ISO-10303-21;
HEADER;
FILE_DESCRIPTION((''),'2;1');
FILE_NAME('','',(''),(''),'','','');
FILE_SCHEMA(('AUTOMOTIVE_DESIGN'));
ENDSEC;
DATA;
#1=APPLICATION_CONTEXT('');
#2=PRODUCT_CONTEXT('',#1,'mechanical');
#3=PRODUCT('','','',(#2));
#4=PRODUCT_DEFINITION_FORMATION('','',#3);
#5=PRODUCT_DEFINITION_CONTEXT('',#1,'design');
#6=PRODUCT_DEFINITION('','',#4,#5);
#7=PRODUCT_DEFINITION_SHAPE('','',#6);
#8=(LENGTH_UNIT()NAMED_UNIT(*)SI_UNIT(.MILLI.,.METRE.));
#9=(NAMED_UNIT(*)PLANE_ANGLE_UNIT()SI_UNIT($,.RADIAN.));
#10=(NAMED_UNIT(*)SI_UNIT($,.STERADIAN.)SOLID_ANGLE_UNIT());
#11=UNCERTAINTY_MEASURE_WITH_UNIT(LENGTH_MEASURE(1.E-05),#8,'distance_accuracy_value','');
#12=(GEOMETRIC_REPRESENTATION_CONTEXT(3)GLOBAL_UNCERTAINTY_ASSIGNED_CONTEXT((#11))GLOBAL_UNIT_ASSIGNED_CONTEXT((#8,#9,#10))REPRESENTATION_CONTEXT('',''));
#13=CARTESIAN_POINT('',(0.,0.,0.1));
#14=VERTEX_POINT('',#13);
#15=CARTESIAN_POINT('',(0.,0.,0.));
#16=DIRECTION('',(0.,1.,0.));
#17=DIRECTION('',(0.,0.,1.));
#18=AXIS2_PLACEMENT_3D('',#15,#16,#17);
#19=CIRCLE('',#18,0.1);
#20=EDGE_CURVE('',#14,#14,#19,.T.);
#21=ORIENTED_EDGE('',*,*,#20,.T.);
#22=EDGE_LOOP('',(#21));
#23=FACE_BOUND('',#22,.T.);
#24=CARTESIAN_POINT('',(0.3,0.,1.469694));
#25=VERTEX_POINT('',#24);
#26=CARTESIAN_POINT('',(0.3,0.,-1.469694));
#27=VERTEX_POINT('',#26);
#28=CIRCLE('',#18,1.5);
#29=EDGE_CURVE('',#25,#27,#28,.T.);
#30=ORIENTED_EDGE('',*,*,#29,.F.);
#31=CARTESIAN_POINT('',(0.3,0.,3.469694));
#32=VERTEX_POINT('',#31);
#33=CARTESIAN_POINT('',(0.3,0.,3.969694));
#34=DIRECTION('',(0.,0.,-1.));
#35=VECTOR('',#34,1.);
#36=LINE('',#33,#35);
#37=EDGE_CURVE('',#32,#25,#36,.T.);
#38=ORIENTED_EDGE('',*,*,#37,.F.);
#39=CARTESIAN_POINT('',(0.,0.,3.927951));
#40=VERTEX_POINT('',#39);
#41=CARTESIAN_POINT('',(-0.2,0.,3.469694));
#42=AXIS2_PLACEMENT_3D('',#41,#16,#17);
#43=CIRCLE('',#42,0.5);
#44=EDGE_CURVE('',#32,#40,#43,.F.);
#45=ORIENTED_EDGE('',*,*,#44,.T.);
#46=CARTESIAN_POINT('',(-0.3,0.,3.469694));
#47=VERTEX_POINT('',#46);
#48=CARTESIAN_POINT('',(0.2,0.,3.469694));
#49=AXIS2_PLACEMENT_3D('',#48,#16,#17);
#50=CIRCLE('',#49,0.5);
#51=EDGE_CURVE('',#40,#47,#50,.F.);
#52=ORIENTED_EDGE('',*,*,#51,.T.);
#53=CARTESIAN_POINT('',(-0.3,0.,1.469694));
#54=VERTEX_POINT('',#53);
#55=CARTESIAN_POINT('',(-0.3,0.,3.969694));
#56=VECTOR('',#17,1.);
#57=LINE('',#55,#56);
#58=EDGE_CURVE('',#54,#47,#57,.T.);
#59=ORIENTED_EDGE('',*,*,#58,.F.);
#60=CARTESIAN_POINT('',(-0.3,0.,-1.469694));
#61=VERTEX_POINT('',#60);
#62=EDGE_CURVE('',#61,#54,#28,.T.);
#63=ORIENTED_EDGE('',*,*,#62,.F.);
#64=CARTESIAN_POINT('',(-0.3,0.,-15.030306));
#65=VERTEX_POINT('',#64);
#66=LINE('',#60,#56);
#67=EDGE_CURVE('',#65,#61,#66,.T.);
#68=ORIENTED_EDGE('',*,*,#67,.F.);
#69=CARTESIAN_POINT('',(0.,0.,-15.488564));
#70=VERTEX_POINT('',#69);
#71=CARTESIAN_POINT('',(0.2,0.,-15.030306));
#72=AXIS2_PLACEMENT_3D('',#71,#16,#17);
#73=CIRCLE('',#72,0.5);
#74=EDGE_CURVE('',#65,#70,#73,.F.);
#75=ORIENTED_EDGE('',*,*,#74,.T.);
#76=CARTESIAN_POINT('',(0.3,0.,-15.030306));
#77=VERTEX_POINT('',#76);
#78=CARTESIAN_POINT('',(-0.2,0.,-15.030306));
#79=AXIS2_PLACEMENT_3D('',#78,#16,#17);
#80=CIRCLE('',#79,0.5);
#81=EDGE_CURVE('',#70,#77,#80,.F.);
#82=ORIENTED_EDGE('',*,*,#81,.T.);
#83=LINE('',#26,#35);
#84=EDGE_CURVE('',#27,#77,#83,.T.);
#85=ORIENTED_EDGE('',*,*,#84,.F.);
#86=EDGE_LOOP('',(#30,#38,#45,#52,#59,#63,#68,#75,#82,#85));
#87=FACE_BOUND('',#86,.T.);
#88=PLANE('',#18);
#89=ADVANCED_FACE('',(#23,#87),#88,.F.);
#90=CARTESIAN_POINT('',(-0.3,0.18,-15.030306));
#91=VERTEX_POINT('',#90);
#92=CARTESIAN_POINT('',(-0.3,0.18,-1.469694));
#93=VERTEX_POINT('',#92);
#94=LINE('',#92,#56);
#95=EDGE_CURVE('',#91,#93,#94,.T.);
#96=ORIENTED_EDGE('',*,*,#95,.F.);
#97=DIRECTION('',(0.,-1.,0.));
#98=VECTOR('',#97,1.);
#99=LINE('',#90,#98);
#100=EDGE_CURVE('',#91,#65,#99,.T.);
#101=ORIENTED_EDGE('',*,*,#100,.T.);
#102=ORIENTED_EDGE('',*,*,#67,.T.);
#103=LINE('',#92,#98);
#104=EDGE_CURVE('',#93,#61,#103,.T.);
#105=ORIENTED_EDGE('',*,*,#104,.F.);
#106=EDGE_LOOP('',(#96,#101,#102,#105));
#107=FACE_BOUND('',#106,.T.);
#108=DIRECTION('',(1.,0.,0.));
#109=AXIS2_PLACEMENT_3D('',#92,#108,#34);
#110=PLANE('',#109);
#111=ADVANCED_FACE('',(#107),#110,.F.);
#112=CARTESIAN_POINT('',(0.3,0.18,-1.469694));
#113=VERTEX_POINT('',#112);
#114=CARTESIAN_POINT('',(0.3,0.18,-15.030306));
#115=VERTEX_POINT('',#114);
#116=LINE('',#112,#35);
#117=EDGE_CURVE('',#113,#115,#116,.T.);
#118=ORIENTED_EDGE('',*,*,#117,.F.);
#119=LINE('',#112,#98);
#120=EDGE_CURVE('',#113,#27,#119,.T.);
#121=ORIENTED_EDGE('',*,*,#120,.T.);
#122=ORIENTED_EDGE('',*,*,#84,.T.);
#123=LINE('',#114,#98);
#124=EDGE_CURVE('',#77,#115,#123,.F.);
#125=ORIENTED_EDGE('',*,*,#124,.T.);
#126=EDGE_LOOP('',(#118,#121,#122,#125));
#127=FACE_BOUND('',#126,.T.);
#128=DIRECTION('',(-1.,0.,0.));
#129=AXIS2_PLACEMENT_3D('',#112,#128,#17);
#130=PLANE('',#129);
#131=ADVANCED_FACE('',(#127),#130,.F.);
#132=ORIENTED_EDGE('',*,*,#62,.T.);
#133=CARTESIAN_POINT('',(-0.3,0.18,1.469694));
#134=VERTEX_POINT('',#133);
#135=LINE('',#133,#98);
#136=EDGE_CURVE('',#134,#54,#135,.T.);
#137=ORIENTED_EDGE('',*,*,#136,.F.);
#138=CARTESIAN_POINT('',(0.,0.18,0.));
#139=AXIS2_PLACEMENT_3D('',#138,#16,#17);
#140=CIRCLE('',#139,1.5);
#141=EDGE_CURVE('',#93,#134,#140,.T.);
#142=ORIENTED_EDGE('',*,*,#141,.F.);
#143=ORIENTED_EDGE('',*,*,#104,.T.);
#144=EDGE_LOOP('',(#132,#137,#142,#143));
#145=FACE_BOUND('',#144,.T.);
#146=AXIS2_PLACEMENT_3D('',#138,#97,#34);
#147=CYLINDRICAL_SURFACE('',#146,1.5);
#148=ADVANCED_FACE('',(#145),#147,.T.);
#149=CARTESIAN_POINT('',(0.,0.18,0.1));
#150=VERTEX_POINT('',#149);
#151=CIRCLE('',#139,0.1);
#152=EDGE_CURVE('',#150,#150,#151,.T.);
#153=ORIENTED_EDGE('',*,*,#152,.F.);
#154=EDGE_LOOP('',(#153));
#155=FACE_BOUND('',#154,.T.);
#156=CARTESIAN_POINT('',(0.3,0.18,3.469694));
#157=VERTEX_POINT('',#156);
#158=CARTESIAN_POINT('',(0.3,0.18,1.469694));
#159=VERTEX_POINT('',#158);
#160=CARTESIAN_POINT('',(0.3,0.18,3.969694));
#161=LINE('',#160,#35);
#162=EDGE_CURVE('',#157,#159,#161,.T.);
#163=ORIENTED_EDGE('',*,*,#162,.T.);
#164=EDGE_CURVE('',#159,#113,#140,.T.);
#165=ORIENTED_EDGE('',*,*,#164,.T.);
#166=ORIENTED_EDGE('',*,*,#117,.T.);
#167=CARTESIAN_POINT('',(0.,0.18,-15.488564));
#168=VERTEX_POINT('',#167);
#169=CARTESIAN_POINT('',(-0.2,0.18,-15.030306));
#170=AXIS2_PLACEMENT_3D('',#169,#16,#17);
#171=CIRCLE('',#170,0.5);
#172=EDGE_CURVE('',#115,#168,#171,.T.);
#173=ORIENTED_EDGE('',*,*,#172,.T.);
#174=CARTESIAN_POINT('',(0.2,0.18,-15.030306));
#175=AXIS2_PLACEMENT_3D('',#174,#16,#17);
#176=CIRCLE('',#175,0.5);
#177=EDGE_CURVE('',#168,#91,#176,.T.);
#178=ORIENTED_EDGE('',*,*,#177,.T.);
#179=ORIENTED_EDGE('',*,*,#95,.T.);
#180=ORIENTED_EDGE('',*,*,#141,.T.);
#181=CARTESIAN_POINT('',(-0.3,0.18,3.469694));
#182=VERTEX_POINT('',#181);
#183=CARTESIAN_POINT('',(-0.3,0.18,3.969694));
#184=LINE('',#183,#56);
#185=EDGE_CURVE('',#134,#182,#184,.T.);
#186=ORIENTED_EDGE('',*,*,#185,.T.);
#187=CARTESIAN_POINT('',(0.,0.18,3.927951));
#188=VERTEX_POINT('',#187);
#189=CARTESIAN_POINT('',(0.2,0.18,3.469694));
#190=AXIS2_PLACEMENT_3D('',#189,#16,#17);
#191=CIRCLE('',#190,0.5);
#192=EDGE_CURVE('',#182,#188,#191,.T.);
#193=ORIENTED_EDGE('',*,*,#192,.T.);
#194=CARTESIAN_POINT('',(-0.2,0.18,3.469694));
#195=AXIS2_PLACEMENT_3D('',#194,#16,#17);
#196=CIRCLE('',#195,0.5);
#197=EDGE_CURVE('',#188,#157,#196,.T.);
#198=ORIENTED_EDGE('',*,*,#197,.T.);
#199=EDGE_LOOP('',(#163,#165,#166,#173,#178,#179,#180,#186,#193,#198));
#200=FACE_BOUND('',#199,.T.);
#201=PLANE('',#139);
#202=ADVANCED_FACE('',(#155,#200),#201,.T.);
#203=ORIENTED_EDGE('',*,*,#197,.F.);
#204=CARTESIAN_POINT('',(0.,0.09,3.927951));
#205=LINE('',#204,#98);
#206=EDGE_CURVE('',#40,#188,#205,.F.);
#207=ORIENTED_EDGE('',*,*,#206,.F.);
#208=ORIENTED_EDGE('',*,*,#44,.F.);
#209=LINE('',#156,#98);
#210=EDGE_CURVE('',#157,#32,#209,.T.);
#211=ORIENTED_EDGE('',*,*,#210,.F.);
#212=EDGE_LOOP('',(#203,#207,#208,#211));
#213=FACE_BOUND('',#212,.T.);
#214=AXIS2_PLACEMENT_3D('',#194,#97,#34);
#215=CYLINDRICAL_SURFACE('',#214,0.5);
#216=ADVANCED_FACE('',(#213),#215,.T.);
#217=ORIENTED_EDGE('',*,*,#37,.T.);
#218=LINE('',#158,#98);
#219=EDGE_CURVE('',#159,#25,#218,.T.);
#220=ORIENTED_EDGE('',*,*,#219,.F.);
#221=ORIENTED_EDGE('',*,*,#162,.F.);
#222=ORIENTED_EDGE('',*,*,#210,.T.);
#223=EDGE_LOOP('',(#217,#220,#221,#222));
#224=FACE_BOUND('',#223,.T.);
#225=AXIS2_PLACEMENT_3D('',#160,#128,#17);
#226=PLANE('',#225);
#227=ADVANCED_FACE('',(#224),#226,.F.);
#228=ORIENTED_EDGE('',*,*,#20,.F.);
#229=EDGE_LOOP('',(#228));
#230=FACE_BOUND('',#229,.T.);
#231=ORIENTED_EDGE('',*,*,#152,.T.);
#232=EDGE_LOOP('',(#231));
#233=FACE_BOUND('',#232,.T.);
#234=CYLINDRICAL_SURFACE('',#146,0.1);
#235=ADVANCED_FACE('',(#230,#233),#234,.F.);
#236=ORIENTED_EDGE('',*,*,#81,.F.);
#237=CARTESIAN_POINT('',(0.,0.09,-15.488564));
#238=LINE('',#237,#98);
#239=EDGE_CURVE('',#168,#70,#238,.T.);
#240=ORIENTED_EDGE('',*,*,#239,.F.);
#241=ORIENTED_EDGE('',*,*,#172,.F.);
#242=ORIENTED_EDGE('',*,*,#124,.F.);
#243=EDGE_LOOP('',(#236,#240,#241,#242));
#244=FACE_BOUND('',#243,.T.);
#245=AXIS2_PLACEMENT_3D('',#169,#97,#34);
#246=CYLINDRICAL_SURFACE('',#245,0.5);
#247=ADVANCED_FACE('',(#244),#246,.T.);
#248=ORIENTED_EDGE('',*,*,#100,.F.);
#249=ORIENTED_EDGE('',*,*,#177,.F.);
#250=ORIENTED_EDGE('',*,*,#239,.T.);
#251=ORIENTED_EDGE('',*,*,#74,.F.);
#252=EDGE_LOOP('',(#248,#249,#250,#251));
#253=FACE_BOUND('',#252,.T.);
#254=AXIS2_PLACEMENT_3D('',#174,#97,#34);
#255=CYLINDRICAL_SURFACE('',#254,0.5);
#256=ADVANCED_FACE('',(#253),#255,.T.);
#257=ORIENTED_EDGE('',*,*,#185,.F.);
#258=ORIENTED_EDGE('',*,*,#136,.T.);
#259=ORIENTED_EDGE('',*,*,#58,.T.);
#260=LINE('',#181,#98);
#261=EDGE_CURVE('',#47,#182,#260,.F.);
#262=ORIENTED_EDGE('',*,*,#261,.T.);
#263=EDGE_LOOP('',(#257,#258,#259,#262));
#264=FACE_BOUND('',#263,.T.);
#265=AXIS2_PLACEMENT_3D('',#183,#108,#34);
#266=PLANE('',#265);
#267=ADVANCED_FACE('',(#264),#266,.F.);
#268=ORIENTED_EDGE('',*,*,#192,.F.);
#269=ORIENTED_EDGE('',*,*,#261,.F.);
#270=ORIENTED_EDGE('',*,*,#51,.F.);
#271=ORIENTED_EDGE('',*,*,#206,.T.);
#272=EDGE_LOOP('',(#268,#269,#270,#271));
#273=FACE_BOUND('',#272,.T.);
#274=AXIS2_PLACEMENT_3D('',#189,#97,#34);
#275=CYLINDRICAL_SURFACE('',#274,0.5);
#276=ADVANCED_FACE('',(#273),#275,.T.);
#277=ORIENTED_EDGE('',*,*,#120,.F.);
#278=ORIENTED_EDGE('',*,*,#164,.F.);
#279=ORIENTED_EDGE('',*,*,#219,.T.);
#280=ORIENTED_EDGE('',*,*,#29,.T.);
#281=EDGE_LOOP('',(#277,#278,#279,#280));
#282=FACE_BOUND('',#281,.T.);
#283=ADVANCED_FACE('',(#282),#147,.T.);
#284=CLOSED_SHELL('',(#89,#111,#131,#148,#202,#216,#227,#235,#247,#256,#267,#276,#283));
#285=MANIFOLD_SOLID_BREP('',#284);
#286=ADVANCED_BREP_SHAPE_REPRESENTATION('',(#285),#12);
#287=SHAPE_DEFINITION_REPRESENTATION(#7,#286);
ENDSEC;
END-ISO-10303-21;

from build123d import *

# Parameters (mm, degrees)
SKETCH1_R           = 0.1
BOSS_EXTRUDE1_DEPTH = 0.18
FILLET2_R           = 0.5


with BuildPart() as part:
    # Sketch1 → Boss-Extrude1 (new body)
    with BuildSketch(Plane(origin=(0, 0, 0), x_dir=(1, 0, 0), z_dir=(0, 1, 0))):
        with BuildLine():
            Line((-0.3, -3.969693846), (-0.3, -1.469693846))
            ThreePointArc((-0.3, -1.469693846), (-1.5, 0), (-0.3, 1.469693846))
            Line((-0.3, 1.469693846), (-0.3, 15.530306154))
            Line((-0.3, 15.530306154), (0.3, 15.530306154))
            Line((0.3, 15.530306154), (0.3, 1.469693846))
            ThreePointArc((0.3, 1.469693846), (1.5, 0), (0.3, -1.469693846))
            Line((0.3, -1.469693846), (0.3, -3.969693846))
            Line((0.3, -3.969693846), (-0.3, -3.969693846))
        make_face()
        with Locations(Location((0, 0, 0), (0, 0, 270))):
            Circle(SKETCH1_R, mode=Mode.SUBTRACT)
    extrude(amount=BOSS_EXTRUDE1_DEPTH)

    # Fillet2
    # the kernel refuses this fillet: 0.5 mm, written as the material it takes off along each edge
    with BuildSketch(Plane(origin=(-0.3, -1.25, -15.530306154), x_dir=(0, 0, 1), z_dir=(0, 1, 0)), Plane(origin=(0.3, -1.25, -15.530306154), x_dir=(-1, 0, 0), z_dir=(0, 1, 0)), Plane(origin=(-0.3, -1.25, 3.969693846), x_dir=(1, 0, 0), z_dir=(0, 1, 0)), Plane(origin=(0.3, -1.25, 3.969693846), x_dir=(0, 0, -1), z_dir=(0, 1, 0))) as fillet2_piece_1:
        with BuildLine():
            CenterArc((FILLET2_R, FILLET2_R), FILLET2_R, 180, 90)
            Line((0, FILLET2_R), (0, 0))
            Line((0, 0), (FILLET2_R, 0))
        make_face()
    extrude(amount=2.68, mode=Mode.SUBTRACT)


solid = part.part
